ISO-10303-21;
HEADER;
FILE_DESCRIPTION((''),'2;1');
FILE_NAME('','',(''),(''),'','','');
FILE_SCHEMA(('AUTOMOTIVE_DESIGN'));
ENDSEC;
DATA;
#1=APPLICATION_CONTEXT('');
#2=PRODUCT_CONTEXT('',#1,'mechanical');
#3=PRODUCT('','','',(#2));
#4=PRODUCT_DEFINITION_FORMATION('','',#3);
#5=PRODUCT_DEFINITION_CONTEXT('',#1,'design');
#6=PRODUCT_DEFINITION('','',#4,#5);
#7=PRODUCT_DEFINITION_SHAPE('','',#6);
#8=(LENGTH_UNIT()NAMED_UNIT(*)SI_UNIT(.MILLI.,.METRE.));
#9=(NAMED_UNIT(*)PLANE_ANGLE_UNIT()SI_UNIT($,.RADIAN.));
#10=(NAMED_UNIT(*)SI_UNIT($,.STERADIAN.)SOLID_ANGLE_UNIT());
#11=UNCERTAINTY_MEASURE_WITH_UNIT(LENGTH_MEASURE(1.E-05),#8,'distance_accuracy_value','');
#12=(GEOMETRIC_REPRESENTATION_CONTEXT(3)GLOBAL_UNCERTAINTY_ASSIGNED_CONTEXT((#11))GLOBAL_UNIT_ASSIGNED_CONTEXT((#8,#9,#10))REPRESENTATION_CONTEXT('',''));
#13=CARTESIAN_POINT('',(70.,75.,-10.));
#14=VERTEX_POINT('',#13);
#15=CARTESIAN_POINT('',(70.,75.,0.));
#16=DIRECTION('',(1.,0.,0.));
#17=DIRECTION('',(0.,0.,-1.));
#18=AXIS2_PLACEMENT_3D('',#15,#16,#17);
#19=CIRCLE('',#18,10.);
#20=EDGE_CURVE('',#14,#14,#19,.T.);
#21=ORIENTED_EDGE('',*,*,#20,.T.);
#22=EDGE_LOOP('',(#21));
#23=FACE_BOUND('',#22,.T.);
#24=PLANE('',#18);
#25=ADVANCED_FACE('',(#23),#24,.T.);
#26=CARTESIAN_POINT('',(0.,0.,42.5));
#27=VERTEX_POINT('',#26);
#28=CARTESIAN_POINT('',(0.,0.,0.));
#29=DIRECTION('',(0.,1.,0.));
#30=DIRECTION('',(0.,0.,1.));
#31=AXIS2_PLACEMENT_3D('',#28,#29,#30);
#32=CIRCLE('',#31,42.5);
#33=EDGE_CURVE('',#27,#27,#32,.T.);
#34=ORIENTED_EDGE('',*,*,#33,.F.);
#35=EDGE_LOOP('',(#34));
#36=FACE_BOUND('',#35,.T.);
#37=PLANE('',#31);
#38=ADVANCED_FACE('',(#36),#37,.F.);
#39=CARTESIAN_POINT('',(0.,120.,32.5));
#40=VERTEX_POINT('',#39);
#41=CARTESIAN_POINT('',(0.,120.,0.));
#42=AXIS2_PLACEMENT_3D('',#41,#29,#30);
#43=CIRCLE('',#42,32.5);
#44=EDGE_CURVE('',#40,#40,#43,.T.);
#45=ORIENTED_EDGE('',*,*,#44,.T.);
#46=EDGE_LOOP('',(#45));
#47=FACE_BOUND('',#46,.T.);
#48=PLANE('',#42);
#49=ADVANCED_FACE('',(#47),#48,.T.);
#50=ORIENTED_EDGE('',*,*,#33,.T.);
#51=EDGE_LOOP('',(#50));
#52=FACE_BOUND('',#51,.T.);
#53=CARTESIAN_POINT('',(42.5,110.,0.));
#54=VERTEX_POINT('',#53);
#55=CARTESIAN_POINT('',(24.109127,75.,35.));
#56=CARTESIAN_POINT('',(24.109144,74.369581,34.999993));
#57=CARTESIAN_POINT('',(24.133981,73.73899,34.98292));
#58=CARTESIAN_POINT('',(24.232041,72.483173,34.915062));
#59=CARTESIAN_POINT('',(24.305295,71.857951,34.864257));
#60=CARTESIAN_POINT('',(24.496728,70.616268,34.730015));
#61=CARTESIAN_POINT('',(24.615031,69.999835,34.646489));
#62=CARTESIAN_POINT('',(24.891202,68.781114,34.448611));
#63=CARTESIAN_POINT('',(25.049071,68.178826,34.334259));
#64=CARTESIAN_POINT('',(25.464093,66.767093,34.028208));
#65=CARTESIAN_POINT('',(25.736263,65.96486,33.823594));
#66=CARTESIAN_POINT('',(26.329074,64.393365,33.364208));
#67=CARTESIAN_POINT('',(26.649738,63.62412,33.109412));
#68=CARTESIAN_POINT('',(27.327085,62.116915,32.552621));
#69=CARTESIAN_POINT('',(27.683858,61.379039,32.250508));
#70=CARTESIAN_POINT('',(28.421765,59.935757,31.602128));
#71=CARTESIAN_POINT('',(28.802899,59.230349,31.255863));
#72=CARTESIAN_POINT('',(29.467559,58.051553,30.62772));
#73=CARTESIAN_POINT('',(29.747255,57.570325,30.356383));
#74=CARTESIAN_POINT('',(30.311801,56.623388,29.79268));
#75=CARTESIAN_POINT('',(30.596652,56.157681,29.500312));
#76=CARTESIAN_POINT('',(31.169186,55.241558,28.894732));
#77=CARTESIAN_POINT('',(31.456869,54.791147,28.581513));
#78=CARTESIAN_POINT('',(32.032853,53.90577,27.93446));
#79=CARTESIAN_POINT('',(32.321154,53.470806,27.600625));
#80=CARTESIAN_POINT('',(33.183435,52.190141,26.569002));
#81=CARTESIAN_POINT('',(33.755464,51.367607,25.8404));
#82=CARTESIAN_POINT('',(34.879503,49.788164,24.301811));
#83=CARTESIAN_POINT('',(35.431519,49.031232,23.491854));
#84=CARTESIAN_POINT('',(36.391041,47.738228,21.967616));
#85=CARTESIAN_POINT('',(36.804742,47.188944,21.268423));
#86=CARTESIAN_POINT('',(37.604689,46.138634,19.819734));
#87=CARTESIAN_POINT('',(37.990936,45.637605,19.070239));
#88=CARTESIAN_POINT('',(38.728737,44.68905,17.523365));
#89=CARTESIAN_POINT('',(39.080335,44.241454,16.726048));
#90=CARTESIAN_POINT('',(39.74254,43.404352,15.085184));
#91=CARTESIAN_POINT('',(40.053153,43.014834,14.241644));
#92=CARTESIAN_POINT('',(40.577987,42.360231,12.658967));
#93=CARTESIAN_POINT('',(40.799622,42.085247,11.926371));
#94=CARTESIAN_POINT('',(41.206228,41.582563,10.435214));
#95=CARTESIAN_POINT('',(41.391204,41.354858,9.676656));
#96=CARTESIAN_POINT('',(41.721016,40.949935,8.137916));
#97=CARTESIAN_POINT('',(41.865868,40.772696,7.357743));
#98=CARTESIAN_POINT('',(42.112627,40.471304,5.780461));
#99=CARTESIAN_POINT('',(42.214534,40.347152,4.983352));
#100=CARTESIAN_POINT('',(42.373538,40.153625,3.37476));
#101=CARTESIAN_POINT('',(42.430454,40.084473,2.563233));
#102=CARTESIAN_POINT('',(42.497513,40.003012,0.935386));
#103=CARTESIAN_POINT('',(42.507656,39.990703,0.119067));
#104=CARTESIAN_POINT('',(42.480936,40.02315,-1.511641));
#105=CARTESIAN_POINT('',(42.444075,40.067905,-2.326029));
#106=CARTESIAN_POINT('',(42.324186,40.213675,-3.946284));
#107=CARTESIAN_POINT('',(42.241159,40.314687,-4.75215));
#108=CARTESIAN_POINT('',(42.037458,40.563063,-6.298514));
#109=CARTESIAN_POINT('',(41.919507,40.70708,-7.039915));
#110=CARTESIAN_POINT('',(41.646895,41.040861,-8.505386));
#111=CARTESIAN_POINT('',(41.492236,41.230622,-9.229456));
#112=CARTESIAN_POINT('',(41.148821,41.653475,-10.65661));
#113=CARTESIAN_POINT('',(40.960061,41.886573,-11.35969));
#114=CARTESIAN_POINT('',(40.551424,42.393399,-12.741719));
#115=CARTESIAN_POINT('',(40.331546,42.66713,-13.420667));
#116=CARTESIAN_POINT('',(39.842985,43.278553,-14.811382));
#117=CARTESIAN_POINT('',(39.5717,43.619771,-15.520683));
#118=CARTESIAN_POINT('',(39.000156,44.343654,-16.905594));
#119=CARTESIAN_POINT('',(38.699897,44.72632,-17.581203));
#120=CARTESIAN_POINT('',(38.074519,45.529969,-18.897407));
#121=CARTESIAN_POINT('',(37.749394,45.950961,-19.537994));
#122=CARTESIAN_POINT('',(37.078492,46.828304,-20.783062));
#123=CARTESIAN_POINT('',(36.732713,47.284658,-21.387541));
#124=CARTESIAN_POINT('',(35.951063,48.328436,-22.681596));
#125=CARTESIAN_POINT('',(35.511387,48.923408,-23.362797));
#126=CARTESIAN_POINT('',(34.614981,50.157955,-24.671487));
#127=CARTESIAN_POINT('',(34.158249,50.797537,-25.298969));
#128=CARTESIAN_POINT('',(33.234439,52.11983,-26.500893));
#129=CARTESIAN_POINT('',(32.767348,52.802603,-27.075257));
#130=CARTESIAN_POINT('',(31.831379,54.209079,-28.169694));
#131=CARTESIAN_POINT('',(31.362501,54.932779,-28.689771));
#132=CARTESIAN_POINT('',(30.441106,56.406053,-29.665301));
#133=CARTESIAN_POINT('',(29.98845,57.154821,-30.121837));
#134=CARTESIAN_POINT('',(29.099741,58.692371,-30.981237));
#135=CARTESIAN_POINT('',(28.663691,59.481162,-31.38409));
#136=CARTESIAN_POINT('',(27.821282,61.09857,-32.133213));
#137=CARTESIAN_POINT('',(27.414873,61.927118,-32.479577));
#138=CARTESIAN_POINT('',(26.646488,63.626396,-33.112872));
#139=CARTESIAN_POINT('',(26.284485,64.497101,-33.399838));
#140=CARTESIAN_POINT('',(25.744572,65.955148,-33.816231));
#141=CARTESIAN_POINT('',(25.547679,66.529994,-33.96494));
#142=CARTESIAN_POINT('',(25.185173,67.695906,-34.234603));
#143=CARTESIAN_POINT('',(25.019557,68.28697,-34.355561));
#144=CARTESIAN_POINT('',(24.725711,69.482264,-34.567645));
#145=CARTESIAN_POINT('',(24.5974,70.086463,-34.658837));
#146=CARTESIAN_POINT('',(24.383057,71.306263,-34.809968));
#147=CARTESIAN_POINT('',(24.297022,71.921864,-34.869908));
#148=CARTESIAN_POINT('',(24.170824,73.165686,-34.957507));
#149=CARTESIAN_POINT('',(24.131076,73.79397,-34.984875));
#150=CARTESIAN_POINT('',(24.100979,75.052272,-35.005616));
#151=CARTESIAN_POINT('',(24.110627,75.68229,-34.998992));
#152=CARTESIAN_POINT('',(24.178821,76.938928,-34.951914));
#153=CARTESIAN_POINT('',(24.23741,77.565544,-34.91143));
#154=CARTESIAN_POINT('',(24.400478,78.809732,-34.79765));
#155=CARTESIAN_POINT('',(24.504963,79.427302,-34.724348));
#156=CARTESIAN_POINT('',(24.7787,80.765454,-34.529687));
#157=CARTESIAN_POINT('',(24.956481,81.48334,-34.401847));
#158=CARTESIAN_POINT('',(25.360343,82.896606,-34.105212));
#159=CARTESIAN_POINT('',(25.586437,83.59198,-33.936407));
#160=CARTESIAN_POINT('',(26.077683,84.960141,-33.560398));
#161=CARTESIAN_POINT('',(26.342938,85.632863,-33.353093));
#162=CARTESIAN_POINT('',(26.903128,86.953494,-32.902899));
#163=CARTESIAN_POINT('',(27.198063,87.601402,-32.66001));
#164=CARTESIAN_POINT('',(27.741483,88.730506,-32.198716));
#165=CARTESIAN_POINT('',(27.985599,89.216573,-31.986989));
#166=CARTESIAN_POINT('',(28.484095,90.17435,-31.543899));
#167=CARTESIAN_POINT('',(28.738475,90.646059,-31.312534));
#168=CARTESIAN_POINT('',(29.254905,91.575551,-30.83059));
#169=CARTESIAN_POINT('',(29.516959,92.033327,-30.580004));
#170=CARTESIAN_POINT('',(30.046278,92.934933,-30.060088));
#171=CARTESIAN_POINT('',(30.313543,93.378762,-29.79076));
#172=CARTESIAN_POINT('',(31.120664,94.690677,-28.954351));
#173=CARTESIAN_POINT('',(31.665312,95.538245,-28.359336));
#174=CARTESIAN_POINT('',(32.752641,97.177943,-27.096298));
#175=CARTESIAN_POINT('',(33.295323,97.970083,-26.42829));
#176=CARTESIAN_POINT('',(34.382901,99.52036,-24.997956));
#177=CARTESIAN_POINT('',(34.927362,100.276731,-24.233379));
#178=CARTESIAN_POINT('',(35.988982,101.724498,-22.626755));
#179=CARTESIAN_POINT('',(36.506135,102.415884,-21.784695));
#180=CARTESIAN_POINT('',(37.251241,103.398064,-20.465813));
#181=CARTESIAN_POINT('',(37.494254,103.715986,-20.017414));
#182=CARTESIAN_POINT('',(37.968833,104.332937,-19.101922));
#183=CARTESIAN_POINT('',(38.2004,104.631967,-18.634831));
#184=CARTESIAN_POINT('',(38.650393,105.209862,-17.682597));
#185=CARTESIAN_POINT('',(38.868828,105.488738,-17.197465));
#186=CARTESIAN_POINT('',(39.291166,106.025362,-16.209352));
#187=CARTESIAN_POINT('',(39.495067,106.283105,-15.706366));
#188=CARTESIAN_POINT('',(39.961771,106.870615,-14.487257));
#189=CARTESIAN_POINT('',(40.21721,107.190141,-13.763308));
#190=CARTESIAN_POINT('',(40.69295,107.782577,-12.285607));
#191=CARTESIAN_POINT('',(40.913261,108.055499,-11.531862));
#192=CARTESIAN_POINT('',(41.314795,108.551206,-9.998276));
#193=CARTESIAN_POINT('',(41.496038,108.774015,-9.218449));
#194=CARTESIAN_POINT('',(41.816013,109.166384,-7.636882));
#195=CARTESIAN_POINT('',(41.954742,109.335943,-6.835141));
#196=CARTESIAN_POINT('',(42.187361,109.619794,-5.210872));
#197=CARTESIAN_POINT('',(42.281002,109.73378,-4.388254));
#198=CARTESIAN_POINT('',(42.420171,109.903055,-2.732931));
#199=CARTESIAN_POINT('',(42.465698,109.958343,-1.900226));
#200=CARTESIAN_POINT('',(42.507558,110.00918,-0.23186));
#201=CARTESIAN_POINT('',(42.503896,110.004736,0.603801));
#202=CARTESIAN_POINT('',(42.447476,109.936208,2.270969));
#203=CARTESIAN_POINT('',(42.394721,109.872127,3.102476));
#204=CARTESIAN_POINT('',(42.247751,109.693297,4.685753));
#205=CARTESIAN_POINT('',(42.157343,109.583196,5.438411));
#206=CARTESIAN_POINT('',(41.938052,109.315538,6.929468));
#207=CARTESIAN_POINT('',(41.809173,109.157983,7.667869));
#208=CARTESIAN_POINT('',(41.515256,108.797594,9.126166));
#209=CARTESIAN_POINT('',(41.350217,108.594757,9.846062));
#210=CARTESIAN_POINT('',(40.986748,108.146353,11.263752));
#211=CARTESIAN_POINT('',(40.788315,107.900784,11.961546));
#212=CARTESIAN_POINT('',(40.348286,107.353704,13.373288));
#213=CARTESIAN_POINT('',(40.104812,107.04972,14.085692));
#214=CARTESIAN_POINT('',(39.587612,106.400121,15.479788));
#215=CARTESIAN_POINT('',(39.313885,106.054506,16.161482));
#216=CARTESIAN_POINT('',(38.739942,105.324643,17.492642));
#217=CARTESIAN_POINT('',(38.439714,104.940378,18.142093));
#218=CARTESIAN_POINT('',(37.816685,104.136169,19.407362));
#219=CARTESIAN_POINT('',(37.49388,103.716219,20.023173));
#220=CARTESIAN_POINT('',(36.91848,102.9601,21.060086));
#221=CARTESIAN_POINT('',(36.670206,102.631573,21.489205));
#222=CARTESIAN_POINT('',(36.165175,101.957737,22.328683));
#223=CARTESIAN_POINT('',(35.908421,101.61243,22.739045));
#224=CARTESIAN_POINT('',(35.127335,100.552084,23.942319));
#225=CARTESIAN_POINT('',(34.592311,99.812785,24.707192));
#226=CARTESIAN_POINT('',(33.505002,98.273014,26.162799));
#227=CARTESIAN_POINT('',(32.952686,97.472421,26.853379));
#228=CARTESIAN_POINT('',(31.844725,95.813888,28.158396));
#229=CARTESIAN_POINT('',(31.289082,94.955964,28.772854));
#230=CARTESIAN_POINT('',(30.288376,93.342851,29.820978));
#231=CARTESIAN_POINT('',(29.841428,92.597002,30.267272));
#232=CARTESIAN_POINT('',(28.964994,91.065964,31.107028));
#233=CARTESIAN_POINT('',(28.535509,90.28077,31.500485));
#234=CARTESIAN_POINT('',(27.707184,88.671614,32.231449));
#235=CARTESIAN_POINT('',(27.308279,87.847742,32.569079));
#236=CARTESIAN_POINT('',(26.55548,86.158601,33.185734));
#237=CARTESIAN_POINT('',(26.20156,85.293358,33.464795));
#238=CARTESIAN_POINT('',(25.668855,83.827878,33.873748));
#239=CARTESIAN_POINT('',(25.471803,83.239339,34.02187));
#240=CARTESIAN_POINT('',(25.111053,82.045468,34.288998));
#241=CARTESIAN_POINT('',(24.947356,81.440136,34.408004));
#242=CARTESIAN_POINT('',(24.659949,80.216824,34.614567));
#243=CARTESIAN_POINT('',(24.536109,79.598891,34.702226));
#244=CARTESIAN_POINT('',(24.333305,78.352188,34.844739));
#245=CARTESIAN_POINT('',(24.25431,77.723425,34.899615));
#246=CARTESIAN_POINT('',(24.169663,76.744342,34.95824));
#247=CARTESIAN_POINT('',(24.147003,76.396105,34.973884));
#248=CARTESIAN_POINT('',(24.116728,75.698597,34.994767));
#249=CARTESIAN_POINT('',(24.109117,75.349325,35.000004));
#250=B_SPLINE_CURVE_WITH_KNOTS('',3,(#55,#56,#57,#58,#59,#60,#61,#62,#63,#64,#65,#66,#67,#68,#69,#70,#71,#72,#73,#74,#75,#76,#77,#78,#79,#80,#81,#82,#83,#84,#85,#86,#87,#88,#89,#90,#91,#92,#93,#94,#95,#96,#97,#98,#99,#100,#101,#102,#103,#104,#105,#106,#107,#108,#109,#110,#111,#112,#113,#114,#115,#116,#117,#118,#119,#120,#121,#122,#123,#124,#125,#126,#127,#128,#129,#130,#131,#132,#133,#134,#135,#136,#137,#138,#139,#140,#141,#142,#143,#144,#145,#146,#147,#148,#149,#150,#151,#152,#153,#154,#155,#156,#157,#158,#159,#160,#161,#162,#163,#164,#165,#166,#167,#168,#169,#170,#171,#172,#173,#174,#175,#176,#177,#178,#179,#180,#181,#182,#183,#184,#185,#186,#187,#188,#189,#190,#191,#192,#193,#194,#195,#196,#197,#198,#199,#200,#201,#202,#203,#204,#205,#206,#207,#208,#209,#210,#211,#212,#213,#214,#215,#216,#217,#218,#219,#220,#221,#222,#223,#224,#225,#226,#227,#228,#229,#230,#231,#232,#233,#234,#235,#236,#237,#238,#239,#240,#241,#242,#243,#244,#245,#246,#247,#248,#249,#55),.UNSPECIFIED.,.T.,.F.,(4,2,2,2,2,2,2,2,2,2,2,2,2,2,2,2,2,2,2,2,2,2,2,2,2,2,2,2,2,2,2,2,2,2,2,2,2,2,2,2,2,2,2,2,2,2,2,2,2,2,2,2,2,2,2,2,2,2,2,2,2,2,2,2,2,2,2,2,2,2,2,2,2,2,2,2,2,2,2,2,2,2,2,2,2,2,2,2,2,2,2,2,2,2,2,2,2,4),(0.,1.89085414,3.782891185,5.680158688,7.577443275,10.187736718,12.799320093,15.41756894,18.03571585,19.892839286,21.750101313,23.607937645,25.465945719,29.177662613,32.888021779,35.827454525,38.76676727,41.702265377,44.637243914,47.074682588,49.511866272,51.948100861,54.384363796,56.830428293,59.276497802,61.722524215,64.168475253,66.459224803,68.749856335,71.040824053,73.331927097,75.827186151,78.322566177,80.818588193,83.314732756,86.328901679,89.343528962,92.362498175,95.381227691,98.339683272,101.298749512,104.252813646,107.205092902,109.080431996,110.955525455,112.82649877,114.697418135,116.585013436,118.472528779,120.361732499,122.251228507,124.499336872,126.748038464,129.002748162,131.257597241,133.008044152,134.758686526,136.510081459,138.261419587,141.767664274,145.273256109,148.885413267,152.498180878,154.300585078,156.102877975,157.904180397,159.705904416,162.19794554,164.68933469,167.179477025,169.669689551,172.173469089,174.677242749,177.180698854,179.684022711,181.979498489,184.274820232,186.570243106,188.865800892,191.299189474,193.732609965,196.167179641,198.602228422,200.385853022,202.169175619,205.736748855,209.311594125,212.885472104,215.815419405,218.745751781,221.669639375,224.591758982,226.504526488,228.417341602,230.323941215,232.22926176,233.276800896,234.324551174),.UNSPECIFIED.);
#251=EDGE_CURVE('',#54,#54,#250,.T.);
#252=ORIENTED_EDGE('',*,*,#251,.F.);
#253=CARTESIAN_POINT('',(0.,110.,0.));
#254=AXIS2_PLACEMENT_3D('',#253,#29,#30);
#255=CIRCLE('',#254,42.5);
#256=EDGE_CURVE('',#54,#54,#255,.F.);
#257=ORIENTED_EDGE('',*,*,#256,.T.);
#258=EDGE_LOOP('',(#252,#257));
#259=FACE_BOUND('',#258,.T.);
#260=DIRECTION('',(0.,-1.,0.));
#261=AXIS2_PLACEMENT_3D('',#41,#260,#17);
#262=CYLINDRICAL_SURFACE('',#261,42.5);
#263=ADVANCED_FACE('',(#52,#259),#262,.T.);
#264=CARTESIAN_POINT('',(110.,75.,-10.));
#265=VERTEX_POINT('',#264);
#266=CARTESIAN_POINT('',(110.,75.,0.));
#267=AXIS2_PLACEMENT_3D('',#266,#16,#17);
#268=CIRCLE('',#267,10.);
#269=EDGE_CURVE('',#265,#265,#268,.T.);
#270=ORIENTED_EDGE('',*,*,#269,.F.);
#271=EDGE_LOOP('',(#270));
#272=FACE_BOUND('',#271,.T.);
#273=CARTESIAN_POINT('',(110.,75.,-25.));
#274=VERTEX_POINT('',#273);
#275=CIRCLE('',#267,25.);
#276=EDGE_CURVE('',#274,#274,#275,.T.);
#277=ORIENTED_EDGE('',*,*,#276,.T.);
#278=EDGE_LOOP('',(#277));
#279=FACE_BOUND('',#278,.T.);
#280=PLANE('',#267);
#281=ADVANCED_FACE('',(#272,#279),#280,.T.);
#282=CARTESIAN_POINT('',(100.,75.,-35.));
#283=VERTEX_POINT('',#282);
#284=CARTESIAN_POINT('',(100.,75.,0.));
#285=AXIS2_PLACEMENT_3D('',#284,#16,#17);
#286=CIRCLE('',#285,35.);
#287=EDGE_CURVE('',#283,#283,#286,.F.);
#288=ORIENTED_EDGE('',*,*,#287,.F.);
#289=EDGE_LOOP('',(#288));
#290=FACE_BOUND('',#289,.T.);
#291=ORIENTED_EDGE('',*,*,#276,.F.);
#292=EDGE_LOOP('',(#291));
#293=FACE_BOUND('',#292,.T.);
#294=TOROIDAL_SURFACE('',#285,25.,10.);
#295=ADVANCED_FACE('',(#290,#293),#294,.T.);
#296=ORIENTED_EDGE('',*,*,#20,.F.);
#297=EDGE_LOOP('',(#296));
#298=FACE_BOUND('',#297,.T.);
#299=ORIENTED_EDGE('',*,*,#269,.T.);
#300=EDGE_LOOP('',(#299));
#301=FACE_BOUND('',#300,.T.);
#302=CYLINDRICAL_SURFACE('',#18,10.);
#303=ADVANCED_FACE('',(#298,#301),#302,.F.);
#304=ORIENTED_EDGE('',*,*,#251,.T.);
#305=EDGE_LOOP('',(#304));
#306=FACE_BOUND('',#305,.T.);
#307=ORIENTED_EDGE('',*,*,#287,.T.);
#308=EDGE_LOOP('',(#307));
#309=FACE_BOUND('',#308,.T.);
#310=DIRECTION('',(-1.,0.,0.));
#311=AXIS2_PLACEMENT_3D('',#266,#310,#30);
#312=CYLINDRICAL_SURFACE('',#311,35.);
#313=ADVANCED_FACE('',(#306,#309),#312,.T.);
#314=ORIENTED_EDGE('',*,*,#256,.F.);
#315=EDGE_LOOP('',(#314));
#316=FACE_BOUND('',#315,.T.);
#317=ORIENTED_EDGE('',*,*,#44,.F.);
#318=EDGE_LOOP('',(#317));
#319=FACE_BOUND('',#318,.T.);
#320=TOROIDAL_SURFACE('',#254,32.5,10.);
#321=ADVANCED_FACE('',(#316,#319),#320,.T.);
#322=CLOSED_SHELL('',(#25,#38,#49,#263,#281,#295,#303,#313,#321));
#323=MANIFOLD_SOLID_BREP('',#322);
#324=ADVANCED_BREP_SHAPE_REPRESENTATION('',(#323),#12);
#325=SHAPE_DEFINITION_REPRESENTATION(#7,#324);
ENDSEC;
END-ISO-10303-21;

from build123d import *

# Parameters (mm, degrees)
SKETCH1_R           = 42.5
BOSS_EXTRUDE1_DEPTH = 120
SKETCH2_R           = 35
BOSS_EXTRUDE2_DEPTH = 110
FILLET1_R           = 10
SKETCH3_R           = 10
CUT_EXTRUDE1_DEPTH  = 40
FILLET2_R           = 10


with BuildPart() as part:
    # Sketch1 → Boss-Extrude1 (new body)
    with BuildSketch(Plane(origin=(0, 0, 0), x_dir=(1, 0, 0), z_dir=(0, 1, 0))):
        Circle(SKETCH1_R)
    extrude(amount=BOSS_EXTRUDE1_DEPTH)

    # Sketch2 → Boss-Extrude2 (add)
    with BuildSketch(Plane(origin=(0, 0, 0), x_dir=(0, 0, -1), z_dir=(1, 0, 0))):
        with Locations((0, 75)):
            Circle(SKETCH2_R)
    extrude(amount=BOSS_EXTRUDE2_DEPTH)

    # Fillet1
    fillet1_edges = [part.edges().sort_by_distance(p)[0] for p in [
        (-42.5, 120, 0),
    ]]
    fillet(fillet1_edges, radius=FILLET1_R)

    # Sketch3 → Cut-Extrude1 (cut)
    with BuildSketch(Plane(origin=(110, 0, 0), x_dir=(0, 0, -1), z_dir=(1, 0, 0))):
        with Locations((0, 75)):
            Circle(SKETCH3_R)
    extrude(amount=-CUT_EXTRUDE1_DEPTH, mode=Mode.SUBTRACT)

    # Fillet2
    fillet2_edges = [part.edges().sort_by_distance(p)[0] for p in [
        (110, 75, 35),
    ]]
    fillet(fillet2_edges, radius=FILLET2_R)


solid = part.part
